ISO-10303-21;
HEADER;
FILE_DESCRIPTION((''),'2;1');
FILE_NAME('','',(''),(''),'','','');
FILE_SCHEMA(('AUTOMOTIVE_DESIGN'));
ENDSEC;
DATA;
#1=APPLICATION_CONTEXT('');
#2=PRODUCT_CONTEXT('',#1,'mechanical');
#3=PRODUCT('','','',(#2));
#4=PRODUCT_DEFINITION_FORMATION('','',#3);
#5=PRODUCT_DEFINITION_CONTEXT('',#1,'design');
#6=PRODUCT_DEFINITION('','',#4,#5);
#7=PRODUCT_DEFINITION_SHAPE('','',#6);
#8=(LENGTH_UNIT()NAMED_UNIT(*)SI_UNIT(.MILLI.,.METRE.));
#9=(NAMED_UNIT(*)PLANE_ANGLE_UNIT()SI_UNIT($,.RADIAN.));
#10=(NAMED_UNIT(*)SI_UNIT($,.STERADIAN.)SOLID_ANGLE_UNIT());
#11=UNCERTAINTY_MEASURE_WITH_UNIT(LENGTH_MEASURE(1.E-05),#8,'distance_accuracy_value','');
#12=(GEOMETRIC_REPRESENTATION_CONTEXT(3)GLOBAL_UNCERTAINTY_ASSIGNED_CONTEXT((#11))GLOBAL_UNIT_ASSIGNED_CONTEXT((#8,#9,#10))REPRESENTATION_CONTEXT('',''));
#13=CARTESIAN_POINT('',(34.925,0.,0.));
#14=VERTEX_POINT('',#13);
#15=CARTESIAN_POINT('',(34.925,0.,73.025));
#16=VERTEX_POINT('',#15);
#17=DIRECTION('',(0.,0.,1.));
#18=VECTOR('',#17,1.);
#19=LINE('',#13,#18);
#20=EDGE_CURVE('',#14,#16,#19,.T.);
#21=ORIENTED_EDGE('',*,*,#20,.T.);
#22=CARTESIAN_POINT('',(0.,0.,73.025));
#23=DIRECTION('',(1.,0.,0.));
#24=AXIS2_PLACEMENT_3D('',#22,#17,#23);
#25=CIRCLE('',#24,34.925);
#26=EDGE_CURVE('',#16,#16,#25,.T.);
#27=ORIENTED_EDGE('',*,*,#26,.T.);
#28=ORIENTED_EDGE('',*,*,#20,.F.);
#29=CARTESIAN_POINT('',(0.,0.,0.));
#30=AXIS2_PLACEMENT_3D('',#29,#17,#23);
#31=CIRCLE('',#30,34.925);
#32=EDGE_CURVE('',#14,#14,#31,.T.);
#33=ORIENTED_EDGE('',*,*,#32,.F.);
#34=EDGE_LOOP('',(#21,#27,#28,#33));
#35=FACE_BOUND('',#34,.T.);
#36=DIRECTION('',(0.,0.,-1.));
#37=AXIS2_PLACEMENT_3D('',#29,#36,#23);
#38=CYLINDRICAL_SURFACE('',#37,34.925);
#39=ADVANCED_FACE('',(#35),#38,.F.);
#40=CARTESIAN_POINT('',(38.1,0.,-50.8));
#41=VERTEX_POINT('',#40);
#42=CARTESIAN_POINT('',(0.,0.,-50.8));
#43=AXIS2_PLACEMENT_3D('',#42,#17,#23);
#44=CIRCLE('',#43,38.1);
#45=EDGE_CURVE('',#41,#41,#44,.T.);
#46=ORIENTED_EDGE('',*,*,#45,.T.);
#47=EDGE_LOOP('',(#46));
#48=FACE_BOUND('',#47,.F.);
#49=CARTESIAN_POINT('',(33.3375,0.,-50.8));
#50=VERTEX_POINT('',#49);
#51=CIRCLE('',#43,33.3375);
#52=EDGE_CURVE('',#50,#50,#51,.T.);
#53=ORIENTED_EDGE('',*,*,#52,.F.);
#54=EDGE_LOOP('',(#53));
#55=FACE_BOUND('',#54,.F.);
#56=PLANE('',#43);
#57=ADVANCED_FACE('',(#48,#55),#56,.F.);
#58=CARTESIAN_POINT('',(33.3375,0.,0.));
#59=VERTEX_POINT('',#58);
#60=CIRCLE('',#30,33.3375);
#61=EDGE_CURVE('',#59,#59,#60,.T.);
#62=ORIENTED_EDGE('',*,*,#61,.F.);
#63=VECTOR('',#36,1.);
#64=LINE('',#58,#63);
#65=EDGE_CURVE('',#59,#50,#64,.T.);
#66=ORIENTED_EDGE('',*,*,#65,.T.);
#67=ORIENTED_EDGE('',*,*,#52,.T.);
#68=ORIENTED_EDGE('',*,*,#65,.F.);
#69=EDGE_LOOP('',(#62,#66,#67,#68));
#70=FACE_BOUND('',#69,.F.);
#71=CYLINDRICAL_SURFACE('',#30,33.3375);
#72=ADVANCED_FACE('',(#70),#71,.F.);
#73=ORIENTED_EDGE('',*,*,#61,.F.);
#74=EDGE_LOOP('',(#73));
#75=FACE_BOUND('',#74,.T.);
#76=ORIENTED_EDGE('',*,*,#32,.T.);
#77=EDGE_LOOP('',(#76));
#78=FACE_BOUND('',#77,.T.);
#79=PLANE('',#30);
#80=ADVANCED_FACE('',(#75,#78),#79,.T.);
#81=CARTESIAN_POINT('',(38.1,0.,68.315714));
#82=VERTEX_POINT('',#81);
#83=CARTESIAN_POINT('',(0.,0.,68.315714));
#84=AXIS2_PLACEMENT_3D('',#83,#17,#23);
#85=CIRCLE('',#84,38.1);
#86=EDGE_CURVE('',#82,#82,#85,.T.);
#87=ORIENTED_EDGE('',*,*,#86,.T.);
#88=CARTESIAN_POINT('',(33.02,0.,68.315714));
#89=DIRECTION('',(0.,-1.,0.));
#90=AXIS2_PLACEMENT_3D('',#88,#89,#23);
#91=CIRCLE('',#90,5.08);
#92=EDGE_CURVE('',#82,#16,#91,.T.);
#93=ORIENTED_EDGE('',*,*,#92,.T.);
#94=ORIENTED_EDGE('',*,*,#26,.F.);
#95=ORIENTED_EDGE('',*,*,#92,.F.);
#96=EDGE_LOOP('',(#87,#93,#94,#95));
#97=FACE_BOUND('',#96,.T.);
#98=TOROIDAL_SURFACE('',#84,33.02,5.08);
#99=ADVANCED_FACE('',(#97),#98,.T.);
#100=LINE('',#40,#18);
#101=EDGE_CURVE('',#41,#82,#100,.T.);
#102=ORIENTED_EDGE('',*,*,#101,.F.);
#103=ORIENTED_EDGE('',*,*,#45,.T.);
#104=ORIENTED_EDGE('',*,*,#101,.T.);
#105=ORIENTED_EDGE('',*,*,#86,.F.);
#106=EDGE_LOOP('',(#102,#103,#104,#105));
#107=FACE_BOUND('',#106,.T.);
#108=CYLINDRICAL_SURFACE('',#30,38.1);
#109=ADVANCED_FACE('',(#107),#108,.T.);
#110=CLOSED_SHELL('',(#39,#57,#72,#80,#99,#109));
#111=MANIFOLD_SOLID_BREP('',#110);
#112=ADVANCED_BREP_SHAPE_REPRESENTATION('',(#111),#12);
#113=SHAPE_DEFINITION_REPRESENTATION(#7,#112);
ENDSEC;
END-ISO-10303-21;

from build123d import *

# Parameters (mm, degrees)
F0_R     = 38.1
F0_R_2   = 34.925
F1_DEPTH = 73.025
F2_R     = 38.1
F2_R_2   = 33.3375
F3_DEPTH = 50.8


# Not quite as in the source:
# - a fillet or chamfer that OpenCascade refuses, or shapes differently, is made with other operations: its cross-section is extruded or revolved along the edge and cut away or added


with BuildPart() as f1:
    # F0 (on Top) → F1 (new body)
    with BuildSketch(Plane.XY):
        Circle(F0_R)
        Circle(F0_R_2, mode=Mode.SUBTRACT)
    extrude(amount=F1_DEPTH)

    # F2 (on Top) → F3 (join)
    with BuildSketch(Plane.XY):
        Circle(F2_R)
        Circle(F2_R_2, mode=Mode.SUBTRACT)
    extrude(amount=-F3_DEPTH)

    # F4: fillet of radius 5.08 on 1 edges, made by hand

    # F4_s1 → F4_t2 (revolve, cut)
    with BuildSketch(Plane.XZ):
        with BuildLine():
            ThreePointArc((38.1, 68.3157139607), (37.2321134838, 71.1555202921), (34.925, 73.025))
            Line((34.925, 73.025), (38.1, 73.025))
            Line((38.1, 73.025), (38.1, 68.3157139607))
        make_face()
    revolve(axis=Axis((0, 0, 73.025), (0, 0, 1)), mode=Mode.SUBTRACT)


solid = f1.part
